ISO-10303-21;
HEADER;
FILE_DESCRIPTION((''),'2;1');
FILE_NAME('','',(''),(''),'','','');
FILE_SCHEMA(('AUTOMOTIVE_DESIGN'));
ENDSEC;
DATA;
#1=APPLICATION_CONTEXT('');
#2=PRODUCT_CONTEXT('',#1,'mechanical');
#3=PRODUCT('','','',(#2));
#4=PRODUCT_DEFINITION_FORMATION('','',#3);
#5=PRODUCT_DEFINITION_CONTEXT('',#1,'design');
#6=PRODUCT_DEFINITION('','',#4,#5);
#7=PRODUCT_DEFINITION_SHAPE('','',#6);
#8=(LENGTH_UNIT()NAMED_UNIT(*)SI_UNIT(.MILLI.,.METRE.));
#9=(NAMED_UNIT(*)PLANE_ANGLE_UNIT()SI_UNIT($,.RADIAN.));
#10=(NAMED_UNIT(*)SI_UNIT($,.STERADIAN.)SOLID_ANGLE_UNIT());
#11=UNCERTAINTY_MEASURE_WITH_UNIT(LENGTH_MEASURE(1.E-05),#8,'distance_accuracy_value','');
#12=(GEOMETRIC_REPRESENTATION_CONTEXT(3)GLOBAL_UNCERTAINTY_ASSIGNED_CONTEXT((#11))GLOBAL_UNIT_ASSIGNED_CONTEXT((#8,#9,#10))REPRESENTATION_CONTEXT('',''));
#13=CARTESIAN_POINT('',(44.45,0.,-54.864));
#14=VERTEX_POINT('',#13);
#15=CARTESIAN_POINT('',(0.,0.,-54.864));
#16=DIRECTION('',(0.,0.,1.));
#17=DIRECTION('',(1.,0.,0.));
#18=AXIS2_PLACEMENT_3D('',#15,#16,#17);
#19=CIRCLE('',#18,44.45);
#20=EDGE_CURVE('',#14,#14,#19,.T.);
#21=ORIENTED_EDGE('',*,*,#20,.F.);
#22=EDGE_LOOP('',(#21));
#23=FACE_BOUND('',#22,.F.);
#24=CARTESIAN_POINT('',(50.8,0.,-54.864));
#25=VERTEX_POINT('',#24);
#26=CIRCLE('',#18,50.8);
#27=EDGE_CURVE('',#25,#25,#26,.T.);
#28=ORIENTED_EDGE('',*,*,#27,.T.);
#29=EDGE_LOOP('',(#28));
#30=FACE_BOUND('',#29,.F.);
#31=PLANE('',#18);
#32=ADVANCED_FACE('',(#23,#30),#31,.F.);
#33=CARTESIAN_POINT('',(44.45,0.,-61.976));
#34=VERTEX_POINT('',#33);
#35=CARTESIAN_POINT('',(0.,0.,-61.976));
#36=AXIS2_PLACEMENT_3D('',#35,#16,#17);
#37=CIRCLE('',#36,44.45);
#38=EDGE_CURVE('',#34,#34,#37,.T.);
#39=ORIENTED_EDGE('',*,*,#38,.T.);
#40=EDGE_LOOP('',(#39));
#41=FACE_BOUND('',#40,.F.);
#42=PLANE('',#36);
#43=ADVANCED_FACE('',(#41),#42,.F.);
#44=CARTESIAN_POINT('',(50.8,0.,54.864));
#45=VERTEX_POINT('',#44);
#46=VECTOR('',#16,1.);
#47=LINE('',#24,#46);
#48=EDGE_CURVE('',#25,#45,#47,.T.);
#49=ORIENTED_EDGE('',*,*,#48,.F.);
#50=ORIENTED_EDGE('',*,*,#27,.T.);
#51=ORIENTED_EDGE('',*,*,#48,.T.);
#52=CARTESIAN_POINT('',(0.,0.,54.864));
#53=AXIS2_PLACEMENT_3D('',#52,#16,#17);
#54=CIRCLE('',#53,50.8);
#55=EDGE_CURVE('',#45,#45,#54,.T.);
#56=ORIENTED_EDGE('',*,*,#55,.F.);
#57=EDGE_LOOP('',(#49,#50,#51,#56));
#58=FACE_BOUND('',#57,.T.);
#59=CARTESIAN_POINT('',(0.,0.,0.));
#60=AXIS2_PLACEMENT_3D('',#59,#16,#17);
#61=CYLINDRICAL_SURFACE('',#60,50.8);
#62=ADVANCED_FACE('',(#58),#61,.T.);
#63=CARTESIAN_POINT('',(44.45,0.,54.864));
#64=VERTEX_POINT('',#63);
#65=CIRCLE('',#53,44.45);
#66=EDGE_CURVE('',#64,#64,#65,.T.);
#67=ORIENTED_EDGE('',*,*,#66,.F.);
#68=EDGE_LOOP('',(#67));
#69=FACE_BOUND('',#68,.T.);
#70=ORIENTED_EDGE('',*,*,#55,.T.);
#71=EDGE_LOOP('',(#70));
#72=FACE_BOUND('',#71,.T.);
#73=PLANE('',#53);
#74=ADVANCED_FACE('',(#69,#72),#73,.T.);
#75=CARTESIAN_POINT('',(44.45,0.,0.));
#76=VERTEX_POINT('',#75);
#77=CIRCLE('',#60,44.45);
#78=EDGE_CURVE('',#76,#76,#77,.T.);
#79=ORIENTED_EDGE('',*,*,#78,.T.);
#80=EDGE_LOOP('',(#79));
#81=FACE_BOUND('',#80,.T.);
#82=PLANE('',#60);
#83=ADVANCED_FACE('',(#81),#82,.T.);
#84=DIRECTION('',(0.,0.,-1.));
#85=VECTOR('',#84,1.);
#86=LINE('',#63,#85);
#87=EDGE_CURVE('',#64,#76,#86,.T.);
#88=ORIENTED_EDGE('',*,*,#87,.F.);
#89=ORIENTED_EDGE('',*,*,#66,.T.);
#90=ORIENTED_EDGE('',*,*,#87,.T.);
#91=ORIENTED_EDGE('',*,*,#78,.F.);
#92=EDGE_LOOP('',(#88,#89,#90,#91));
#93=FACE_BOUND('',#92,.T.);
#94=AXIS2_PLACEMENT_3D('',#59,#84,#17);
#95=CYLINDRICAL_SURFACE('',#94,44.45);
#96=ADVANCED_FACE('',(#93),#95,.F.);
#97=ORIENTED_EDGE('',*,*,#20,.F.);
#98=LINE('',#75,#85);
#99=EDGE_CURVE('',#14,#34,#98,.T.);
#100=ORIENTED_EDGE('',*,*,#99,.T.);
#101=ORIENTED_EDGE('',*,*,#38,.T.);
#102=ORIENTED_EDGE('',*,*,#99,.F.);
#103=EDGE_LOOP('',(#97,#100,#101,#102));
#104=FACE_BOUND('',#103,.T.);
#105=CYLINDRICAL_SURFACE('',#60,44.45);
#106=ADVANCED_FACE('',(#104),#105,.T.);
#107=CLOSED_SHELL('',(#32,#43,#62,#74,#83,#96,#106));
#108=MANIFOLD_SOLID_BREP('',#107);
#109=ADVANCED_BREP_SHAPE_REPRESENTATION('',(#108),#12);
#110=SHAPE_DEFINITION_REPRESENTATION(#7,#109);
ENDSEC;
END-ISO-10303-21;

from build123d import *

# Parameters (mm, degrees)
F0_R     = 50.8
F0_R_2   = 44.45
F1_DEPTH = 54.864
F3_DEPTH = 61.976


# Not quite as in the source:
# - the program builds the solid bodies; features that only make, move or delete a surface that nothing else refers to are left out


with BuildPart() as f1:
    # F0 (on Top) → F1 (new body, symmetric)
    with BuildSketch(Plane.XY):
        Circle(F0_R)
        Circle(F0_R_2, mode=Mode.SUBTRACT)
    extrude(amount=F1_DEPTH, both=True)

    # F0 (on Top) → F3 (join)
    with BuildSketch(Plane.XY):
        Circle(F0_R_2)
    extrude(amount=-F3_DEPTH)


solid = f1.part
